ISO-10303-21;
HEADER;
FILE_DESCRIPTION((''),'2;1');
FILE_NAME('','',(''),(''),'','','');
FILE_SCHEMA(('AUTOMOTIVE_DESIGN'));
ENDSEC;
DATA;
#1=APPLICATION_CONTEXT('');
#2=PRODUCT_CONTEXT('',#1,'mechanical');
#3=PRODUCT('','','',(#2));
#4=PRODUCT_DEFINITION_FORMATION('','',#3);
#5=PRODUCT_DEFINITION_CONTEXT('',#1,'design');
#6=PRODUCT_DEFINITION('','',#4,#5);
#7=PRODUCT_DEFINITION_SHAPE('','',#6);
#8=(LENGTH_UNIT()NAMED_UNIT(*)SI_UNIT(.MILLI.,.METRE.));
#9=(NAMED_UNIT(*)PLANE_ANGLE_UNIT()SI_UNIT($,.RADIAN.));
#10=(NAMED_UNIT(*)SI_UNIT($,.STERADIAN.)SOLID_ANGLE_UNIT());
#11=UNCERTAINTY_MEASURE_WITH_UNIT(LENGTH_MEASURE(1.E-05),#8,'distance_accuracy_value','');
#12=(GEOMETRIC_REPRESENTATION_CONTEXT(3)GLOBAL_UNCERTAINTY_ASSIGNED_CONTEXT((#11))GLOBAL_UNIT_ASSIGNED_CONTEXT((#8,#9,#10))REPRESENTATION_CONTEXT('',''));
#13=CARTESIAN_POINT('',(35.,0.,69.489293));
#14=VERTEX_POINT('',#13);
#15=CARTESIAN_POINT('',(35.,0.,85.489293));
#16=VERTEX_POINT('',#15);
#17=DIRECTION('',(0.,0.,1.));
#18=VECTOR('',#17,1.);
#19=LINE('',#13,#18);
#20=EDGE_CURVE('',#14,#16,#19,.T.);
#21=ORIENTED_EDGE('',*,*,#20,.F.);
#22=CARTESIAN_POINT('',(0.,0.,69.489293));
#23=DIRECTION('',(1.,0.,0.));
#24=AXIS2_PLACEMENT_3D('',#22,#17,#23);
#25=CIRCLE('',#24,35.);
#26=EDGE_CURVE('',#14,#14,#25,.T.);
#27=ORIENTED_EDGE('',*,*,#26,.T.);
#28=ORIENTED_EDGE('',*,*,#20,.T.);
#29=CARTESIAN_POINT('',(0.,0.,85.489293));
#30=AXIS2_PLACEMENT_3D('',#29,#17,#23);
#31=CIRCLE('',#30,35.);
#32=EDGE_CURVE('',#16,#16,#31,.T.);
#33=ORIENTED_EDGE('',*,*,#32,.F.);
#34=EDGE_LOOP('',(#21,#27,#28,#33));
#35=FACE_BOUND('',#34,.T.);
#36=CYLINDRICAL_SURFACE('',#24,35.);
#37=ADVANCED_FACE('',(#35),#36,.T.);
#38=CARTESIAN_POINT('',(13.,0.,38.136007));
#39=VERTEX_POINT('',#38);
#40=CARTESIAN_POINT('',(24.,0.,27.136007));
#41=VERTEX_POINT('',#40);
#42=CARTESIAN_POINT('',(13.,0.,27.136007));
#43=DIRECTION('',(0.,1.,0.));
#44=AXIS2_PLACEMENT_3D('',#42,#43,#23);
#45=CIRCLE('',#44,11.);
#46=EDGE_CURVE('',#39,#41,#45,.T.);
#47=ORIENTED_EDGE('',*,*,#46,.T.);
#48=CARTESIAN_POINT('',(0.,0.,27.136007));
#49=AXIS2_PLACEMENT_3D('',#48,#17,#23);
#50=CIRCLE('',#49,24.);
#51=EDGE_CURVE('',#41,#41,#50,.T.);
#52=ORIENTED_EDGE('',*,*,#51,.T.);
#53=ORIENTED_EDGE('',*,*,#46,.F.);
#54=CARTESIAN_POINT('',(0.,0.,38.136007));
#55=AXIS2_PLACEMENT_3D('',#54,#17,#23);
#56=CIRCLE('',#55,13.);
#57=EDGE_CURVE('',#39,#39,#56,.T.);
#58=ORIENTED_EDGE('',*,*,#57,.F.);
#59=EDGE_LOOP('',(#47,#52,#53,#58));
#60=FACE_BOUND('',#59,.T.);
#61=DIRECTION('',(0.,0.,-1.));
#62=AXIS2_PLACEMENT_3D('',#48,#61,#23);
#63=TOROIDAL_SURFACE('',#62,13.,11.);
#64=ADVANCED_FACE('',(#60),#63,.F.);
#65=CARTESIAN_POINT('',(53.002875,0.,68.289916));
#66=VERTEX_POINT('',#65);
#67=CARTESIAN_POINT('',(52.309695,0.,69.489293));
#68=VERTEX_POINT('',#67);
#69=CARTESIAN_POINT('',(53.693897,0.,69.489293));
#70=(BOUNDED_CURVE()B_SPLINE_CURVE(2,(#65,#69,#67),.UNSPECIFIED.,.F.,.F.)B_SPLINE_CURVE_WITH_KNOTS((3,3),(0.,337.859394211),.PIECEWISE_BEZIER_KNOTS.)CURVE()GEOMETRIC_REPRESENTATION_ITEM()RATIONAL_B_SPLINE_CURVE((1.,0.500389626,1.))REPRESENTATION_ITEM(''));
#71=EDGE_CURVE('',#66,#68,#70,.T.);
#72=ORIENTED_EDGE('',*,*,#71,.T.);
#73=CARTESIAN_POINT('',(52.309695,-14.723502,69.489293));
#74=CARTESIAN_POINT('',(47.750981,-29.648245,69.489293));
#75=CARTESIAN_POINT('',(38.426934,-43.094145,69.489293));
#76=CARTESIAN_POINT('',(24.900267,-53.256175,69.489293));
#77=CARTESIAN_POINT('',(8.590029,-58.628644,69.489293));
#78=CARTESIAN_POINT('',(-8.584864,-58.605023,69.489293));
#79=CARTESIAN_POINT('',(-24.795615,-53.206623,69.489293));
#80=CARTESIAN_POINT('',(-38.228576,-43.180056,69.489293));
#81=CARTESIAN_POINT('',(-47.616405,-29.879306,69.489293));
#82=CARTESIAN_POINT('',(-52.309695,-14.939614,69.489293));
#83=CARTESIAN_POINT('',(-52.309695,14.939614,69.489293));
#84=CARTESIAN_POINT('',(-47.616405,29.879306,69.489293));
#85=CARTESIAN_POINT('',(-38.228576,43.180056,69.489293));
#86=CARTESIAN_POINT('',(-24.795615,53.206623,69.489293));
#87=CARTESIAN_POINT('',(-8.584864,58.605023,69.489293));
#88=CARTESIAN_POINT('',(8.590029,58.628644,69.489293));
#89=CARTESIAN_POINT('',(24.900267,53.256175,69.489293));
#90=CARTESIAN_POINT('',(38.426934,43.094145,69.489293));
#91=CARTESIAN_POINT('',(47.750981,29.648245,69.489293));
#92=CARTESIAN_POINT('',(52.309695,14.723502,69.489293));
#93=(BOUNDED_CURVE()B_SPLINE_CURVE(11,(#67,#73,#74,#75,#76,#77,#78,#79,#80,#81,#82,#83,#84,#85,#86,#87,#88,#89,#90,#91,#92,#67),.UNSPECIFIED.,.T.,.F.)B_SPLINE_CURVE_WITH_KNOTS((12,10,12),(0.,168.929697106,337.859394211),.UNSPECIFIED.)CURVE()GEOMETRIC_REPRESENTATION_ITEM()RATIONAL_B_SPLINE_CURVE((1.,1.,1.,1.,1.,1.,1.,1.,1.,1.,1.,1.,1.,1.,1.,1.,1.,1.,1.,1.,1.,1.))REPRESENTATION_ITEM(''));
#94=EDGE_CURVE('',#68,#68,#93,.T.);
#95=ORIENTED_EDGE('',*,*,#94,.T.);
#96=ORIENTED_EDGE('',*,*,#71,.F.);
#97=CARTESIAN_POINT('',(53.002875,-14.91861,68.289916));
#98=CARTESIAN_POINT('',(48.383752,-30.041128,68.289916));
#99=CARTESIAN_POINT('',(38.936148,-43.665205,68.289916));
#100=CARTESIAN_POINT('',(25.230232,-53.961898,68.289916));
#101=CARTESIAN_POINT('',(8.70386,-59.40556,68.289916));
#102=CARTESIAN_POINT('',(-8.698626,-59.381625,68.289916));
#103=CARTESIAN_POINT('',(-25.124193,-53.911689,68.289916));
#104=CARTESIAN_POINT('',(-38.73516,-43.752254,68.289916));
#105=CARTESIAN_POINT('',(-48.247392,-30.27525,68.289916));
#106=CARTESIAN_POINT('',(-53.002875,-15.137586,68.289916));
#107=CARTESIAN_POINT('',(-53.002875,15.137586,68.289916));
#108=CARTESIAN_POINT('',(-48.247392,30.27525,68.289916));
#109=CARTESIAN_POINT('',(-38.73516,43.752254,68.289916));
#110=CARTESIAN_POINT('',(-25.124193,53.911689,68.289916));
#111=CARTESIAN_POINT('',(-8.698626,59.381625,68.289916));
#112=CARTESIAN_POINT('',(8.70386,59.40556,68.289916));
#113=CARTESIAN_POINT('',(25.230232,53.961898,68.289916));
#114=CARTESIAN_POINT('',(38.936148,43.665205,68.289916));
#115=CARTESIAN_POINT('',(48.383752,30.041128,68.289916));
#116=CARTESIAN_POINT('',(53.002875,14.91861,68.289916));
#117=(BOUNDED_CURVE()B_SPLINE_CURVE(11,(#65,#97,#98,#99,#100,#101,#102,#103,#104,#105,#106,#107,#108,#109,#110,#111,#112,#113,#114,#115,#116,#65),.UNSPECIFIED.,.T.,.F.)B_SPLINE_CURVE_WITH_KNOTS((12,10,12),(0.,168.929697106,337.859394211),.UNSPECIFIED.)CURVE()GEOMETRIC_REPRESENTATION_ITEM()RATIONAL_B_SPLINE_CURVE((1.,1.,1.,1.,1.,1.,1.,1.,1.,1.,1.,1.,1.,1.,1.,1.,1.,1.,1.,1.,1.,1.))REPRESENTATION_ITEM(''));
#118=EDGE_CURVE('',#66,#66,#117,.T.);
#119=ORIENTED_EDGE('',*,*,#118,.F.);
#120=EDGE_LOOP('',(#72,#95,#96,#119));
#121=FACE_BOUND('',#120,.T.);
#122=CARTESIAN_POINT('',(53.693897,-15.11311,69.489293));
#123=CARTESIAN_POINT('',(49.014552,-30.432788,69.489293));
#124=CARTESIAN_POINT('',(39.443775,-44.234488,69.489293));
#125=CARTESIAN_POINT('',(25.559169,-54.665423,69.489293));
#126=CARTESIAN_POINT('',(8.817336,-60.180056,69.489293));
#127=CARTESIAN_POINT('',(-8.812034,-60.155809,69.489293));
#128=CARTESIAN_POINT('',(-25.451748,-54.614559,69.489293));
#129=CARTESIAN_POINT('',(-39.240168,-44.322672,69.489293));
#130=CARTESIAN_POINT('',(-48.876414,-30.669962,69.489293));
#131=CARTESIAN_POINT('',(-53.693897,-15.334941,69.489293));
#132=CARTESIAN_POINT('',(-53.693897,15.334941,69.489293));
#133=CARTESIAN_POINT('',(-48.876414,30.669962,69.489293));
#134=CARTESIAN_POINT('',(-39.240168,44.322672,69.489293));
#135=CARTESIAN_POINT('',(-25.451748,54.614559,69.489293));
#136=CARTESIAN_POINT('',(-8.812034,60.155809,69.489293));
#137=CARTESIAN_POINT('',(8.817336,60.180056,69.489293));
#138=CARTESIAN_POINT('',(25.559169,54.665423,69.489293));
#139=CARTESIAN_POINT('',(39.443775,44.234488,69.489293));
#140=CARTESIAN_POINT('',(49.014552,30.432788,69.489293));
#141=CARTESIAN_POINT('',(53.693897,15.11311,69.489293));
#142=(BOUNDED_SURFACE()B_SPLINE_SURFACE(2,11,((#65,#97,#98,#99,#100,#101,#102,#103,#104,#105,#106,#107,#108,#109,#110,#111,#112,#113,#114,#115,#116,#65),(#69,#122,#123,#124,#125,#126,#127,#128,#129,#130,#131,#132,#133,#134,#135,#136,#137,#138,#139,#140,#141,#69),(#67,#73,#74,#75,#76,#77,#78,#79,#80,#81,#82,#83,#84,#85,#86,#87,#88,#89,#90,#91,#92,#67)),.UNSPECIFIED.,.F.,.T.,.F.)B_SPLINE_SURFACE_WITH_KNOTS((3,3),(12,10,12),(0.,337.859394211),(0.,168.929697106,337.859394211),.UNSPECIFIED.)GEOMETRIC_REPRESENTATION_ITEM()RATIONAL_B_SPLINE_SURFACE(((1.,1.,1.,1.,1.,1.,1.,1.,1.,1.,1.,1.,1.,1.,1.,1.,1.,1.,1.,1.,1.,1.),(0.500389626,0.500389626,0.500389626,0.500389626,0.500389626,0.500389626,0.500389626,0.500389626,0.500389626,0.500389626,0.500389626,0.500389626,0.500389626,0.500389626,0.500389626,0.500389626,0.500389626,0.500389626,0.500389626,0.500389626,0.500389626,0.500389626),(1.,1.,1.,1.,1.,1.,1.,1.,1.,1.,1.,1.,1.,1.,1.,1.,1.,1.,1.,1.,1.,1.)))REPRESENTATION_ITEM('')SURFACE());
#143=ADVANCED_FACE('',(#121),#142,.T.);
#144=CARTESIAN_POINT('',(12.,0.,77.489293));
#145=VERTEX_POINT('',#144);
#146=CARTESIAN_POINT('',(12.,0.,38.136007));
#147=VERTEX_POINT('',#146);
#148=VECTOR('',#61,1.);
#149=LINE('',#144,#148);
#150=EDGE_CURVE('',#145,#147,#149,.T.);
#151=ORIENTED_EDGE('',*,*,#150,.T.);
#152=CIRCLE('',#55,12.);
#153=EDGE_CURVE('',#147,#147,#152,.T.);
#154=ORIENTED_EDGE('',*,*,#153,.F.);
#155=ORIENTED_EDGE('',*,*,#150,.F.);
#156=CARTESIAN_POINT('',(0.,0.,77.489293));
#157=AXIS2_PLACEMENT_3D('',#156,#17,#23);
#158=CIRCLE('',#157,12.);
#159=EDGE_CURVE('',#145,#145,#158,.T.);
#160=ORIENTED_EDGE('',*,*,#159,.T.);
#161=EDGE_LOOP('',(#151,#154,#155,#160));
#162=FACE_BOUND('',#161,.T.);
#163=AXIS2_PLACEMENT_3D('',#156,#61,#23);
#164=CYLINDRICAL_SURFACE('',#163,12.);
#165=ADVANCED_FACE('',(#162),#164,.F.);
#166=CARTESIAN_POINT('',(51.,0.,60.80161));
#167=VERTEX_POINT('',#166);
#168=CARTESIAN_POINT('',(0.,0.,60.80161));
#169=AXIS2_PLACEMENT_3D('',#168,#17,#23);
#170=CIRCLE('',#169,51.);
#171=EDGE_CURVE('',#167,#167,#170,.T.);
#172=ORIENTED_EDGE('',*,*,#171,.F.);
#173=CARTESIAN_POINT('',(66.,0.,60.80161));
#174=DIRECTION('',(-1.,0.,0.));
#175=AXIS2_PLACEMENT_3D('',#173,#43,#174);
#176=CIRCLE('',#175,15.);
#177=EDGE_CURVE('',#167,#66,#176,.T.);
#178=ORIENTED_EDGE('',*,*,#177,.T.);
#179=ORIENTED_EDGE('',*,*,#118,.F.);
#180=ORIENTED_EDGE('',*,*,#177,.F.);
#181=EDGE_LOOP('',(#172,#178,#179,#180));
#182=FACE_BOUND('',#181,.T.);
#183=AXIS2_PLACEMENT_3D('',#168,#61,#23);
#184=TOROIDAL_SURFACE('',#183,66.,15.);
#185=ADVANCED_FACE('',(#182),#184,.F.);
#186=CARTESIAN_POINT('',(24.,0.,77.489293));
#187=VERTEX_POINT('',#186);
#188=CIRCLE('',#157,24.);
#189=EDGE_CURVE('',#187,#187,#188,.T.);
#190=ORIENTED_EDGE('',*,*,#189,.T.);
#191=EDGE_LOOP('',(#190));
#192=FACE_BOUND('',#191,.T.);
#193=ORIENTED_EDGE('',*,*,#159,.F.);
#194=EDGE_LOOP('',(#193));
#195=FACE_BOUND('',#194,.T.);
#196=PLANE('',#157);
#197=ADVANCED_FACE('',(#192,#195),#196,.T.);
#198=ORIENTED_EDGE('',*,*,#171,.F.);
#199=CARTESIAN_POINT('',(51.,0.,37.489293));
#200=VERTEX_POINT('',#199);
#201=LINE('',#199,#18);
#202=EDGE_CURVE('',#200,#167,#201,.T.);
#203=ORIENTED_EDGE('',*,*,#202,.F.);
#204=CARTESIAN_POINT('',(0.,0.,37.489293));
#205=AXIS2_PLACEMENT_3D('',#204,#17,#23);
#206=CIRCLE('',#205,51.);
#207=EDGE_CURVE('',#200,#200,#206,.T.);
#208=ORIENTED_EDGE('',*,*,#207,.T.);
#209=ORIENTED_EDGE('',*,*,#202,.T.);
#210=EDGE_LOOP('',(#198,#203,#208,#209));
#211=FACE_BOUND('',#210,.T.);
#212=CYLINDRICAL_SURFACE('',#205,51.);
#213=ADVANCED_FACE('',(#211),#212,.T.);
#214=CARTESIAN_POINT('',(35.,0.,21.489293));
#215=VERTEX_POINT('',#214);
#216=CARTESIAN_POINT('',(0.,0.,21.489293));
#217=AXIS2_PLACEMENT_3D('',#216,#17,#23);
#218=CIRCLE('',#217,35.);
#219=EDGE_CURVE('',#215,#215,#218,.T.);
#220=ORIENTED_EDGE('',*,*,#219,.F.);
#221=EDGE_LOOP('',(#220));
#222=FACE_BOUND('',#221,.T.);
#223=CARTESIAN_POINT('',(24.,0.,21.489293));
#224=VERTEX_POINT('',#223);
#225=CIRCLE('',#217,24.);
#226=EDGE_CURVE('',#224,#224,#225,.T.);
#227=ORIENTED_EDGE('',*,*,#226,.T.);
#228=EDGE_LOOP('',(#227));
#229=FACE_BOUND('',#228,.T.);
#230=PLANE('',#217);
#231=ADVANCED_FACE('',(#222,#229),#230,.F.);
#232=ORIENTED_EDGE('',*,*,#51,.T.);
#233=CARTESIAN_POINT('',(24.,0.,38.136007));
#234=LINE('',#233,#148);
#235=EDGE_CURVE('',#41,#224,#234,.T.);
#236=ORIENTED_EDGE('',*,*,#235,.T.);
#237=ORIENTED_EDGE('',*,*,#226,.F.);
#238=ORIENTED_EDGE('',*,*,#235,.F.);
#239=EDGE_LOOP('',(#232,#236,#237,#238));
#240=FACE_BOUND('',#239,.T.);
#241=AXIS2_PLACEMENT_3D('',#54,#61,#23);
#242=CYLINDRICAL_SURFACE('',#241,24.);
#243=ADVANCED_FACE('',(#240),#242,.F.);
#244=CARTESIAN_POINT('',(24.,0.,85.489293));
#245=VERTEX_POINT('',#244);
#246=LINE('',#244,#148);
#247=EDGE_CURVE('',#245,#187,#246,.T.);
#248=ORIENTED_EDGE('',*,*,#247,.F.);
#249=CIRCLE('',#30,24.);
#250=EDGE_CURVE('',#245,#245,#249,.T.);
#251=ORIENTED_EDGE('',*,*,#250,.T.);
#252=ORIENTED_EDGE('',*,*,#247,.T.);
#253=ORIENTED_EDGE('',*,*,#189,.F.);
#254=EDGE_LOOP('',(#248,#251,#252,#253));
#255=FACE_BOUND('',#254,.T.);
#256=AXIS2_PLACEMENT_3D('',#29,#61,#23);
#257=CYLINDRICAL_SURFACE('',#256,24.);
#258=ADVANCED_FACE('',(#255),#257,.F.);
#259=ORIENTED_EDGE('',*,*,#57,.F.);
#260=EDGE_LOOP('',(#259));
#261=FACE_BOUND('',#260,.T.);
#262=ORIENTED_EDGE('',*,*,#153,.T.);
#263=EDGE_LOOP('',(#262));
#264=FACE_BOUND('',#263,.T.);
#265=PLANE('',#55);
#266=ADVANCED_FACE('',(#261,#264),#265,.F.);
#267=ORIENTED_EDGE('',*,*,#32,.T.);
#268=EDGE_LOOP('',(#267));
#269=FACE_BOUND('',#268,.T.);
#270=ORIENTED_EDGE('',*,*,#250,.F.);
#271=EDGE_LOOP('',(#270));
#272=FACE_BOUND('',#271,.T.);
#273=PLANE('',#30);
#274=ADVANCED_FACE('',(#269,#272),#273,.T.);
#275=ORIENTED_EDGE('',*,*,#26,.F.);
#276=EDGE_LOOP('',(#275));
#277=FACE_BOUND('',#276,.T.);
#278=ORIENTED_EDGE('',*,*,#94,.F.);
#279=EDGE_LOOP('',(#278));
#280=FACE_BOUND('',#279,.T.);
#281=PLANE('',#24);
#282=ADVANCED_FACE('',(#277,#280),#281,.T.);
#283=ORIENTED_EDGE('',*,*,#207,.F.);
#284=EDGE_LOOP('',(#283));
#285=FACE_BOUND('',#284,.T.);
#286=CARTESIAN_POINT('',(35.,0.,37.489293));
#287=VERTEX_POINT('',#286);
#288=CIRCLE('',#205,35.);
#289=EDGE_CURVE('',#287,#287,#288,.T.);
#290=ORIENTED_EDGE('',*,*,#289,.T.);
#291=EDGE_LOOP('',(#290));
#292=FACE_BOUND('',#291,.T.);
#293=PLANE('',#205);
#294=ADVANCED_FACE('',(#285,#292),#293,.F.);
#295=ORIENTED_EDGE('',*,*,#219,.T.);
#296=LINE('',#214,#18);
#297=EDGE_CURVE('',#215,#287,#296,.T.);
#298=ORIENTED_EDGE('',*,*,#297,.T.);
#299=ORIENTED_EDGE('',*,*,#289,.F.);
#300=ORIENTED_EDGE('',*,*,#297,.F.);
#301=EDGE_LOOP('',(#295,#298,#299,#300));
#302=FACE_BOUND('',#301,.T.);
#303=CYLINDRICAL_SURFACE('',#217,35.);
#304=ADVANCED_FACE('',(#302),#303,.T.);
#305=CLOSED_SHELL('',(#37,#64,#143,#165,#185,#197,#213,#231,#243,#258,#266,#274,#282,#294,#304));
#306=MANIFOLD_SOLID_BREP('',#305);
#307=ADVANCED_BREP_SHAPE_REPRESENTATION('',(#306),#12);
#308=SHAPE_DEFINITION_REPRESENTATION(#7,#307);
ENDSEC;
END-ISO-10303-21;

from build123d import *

# Parameters (mm, degrees)
F2_R = 11
F4_R = 0.8


# Not quite as in the source:
# - a fillet or chamfer that OpenCascade refuses, or shapes differently, is made with other operations: its cross-section is extruded or revolved along the edge and cut away or added


with BuildPart() as f1:
    # F0 (on Front) → F1 (revolve)
    with BuildSketch(Plane.XZ):
        Polygon((24, 85.4892928004), (24, 77.4892928004), (12, 77.4892928004), (12, 38.1360072643), (24, 38.1360072643), (24, 21.4892928004), (35, 21.4892928004), (35, 37.4892928004), (51, 37.4892928004), (51, 65.592944622), (51, 69.4892928004), (35, 69.4892928004), (35, 85.4892928004), align=None)
        Polygon((53.7719889283, 69.4892928004), (51, 69.4892928004), (51, 65.592944622), align=None)
    revolve(axis=Axis((0, 0, 48.0438946244), (0, 0, 1)))

    # F2
    f2_edges = [f1.edges().sort_by_distance(p)[0] for p in [
        (-24, 0, 38.136007),
    ]]
    fillet(f2_edges, radius=F2_R)

    # F3: fillet of radius 15 on 1 edges, made by hand


with BuildPart() as f3_tool2:
    # F3_s3 → F3_t4 (revolve)
    with BuildSketch(Plane.XZ):
        with BuildLine():
            ThreePointArc((51, 60.8016097685), (51.7112437374, 65.3657574948), (53.777525929, 69.4970756895))
            Line((53.777525929, 69.4970756895), (51, 65.592944622))
            Line((51, 65.592944622), (51, 60.8016097685))
        make_face()
    revolve(axis=Axis((0, 0, 65.592944622), (0, 0, 1)))

    split(bisect_by=Plane.XY.offset(69.4892928004), keep=Keep.BOTTOM)


with BuildPart() as f1_1:
    add(f1.part)

    # F3_t1: union F3_tool2
    add(f3_tool2.part)

    # F4
    f4_edges = [f1_1.edges().sort_by_distance(p)[0] for p in [
        (-53.771993, 0, 69.489293),
    ]]
    fillet(f4_edges, radius=F4_R)


solid = f1_1.part
